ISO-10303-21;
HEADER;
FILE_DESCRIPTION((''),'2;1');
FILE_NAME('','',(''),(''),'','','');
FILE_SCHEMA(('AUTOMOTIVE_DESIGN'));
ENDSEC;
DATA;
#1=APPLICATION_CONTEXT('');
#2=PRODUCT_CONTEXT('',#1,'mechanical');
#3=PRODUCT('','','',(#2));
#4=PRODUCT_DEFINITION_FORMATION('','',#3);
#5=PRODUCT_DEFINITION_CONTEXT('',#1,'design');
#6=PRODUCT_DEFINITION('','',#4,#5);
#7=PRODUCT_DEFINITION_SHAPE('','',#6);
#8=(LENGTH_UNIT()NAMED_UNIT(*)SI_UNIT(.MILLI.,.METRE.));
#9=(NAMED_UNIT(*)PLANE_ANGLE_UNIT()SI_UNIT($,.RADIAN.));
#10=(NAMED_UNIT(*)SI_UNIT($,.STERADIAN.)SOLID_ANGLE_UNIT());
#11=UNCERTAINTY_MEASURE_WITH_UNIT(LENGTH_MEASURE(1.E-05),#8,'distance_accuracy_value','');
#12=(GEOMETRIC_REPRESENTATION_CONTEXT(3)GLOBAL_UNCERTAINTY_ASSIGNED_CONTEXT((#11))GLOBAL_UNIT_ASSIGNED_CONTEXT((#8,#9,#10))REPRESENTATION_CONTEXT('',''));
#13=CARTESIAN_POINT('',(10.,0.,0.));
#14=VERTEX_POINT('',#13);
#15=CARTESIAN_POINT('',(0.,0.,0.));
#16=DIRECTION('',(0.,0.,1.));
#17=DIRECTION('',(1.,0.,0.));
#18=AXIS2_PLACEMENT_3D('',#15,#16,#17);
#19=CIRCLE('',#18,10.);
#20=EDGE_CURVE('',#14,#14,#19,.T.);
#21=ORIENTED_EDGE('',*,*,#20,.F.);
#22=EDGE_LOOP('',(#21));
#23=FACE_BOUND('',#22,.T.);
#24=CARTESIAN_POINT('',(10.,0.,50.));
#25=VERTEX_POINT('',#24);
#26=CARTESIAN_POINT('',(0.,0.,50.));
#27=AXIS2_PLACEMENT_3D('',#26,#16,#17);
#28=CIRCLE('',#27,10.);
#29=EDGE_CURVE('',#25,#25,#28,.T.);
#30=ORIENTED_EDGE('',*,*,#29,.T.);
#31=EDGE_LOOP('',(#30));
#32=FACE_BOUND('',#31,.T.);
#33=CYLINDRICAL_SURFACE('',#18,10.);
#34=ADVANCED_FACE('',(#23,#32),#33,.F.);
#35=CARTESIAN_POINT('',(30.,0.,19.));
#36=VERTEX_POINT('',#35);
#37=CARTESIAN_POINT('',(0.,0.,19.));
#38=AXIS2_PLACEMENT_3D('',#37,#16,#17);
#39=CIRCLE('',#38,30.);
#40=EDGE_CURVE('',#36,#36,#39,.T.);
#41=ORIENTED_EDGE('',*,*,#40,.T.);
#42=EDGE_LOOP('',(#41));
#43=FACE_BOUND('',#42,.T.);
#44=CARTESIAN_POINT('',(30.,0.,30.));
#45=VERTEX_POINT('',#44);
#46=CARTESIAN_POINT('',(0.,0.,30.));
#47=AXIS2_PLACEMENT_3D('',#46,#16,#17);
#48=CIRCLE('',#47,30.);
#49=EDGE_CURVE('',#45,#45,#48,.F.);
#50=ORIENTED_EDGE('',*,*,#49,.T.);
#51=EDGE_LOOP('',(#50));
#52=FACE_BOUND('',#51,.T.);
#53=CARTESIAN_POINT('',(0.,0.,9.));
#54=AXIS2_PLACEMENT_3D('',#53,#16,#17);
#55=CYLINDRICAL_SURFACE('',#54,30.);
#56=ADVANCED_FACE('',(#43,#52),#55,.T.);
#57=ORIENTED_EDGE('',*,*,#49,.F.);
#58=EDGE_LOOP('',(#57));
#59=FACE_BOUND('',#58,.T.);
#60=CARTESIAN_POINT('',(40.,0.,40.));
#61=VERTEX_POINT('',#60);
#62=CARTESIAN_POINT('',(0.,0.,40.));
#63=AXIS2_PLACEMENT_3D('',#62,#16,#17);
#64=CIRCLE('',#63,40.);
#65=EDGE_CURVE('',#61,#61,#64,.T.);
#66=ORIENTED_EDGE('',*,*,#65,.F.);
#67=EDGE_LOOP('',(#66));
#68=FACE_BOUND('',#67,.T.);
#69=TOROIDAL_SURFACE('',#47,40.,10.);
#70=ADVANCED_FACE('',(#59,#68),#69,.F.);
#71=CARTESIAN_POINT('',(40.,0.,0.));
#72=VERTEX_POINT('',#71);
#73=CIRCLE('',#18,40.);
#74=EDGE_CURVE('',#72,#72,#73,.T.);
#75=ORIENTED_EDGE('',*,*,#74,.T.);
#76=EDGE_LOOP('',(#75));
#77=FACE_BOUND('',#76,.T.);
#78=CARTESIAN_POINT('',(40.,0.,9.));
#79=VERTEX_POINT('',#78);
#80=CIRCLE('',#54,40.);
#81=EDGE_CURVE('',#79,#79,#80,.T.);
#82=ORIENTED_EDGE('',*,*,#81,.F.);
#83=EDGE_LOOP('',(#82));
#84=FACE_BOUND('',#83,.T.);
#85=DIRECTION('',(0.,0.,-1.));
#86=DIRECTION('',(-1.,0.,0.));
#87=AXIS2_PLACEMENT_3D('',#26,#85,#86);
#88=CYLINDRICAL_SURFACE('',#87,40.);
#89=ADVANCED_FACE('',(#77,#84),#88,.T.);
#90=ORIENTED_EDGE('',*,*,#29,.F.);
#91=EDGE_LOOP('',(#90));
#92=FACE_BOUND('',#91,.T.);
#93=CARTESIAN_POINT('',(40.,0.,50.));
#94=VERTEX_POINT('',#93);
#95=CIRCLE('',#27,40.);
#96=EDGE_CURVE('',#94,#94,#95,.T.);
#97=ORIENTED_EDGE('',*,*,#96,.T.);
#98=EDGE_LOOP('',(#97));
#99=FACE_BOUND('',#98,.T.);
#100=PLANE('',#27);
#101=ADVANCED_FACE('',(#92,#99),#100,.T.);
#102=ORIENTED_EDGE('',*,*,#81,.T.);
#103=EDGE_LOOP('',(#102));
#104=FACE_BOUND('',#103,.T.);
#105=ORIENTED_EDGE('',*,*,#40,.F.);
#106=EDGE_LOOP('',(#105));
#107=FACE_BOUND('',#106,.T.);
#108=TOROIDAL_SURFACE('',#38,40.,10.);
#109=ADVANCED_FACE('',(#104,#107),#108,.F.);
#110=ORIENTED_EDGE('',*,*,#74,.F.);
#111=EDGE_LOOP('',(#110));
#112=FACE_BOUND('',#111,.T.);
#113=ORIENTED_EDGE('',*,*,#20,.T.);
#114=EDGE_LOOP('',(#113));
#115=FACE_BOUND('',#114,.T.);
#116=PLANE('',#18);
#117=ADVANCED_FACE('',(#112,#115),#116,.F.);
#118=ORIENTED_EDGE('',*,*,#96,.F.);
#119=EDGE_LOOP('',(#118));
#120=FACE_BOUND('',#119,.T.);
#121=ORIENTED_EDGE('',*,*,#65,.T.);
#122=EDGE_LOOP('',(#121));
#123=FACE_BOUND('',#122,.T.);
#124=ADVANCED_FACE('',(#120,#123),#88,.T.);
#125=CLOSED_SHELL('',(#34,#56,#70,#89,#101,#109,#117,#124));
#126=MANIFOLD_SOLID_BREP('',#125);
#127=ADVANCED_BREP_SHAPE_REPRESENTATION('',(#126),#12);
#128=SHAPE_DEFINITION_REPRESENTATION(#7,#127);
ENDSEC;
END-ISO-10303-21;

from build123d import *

# Parameters (mm, degrees)
SKETCH_1_R               = 40
EXTRUDE_1_DEPTH          = 50
CUT_EXTRUDE_1_DEPTH      = 15
CUT_EXTRUDE_1_DEPTH_BACK = 16
SKETCH_2_OUTSIDE_W       = 106.738
SKETCH_2_OUTSIDE_H       = 106.738
SKETCH_2_OUTSIDE_R       = 30
FILLET_1_R               = 10
FILLET_2_R               = 10
CUT_EXTRUDE_2_DEPTH      = 62.846584384
CUT_EXTRUDE_2_DEPTH_BACK = 62.846584384
SKETCH_3_R               = 10


with BuildPart() as part:
    # 草图1 → 凸台-拉伸1 (new body)
    with BuildSketch(Plane.XY):
        Circle(SKETCH_1_R)
    extrude(amount=EXTRUDE_1_DEPTH)

    # 草图2 outside → 切除-拉伸1 (cut, two sides: drawn at the far end of the back side and taken through both)
    with BuildSketch(Plane.XY.offset(25).offset(-CUT_EXTRUDE_1_DEPTH_BACK)):
        Rectangle(SKETCH_2_OUTSIDE_W, SKETCH_2_OUTSIDE_H)
        Circle(SKETCH_2_OUTSIDE_R, mode=Mode.SUBTRACT)
    extrude(amount=CUT_EXTRUDE_1_DEPTH + CUT_EXTRUDE_1_DEPTH_BACK, mode=Mode.SUBTRACT)

    # 圆角1
    fillet_1_edges = [part.edges().sort_by_distance(p)[0] for p in [
        (-30, 0, 40),
    ]]
    fillet(fillet_1_edges, radius=FILLET_1_R - 0.0001)  # a hair under: the kernel refuses the full size

    # 圆角2
    fillet_2_edges = [part.edges().sort_by_distance(p)[0] for p in [
        (-30, 0, 9),
    ]]
    fillet(fillet_2_edges, radius=FILLET_2_R - 0.0001)  # a hair under: the kernel refuses the full size

    # 草图3 → 切除-拉伸2 (cut, two sides: drawn at the far end of the back side and taken through both)
    with BuildSketch(Plane.XY.offset(25).offset(-CUT_EXTRUDE_2_DEPTH_BACK)):
        Circle(SKETCH_3_R)
    extrude(amount=CUT_EXTRUDE_2_DEPTH + CUT_EXTRUDE_2_DEPTH_BACK, mode=Mode.SUBTRACT)


solid = part.part
